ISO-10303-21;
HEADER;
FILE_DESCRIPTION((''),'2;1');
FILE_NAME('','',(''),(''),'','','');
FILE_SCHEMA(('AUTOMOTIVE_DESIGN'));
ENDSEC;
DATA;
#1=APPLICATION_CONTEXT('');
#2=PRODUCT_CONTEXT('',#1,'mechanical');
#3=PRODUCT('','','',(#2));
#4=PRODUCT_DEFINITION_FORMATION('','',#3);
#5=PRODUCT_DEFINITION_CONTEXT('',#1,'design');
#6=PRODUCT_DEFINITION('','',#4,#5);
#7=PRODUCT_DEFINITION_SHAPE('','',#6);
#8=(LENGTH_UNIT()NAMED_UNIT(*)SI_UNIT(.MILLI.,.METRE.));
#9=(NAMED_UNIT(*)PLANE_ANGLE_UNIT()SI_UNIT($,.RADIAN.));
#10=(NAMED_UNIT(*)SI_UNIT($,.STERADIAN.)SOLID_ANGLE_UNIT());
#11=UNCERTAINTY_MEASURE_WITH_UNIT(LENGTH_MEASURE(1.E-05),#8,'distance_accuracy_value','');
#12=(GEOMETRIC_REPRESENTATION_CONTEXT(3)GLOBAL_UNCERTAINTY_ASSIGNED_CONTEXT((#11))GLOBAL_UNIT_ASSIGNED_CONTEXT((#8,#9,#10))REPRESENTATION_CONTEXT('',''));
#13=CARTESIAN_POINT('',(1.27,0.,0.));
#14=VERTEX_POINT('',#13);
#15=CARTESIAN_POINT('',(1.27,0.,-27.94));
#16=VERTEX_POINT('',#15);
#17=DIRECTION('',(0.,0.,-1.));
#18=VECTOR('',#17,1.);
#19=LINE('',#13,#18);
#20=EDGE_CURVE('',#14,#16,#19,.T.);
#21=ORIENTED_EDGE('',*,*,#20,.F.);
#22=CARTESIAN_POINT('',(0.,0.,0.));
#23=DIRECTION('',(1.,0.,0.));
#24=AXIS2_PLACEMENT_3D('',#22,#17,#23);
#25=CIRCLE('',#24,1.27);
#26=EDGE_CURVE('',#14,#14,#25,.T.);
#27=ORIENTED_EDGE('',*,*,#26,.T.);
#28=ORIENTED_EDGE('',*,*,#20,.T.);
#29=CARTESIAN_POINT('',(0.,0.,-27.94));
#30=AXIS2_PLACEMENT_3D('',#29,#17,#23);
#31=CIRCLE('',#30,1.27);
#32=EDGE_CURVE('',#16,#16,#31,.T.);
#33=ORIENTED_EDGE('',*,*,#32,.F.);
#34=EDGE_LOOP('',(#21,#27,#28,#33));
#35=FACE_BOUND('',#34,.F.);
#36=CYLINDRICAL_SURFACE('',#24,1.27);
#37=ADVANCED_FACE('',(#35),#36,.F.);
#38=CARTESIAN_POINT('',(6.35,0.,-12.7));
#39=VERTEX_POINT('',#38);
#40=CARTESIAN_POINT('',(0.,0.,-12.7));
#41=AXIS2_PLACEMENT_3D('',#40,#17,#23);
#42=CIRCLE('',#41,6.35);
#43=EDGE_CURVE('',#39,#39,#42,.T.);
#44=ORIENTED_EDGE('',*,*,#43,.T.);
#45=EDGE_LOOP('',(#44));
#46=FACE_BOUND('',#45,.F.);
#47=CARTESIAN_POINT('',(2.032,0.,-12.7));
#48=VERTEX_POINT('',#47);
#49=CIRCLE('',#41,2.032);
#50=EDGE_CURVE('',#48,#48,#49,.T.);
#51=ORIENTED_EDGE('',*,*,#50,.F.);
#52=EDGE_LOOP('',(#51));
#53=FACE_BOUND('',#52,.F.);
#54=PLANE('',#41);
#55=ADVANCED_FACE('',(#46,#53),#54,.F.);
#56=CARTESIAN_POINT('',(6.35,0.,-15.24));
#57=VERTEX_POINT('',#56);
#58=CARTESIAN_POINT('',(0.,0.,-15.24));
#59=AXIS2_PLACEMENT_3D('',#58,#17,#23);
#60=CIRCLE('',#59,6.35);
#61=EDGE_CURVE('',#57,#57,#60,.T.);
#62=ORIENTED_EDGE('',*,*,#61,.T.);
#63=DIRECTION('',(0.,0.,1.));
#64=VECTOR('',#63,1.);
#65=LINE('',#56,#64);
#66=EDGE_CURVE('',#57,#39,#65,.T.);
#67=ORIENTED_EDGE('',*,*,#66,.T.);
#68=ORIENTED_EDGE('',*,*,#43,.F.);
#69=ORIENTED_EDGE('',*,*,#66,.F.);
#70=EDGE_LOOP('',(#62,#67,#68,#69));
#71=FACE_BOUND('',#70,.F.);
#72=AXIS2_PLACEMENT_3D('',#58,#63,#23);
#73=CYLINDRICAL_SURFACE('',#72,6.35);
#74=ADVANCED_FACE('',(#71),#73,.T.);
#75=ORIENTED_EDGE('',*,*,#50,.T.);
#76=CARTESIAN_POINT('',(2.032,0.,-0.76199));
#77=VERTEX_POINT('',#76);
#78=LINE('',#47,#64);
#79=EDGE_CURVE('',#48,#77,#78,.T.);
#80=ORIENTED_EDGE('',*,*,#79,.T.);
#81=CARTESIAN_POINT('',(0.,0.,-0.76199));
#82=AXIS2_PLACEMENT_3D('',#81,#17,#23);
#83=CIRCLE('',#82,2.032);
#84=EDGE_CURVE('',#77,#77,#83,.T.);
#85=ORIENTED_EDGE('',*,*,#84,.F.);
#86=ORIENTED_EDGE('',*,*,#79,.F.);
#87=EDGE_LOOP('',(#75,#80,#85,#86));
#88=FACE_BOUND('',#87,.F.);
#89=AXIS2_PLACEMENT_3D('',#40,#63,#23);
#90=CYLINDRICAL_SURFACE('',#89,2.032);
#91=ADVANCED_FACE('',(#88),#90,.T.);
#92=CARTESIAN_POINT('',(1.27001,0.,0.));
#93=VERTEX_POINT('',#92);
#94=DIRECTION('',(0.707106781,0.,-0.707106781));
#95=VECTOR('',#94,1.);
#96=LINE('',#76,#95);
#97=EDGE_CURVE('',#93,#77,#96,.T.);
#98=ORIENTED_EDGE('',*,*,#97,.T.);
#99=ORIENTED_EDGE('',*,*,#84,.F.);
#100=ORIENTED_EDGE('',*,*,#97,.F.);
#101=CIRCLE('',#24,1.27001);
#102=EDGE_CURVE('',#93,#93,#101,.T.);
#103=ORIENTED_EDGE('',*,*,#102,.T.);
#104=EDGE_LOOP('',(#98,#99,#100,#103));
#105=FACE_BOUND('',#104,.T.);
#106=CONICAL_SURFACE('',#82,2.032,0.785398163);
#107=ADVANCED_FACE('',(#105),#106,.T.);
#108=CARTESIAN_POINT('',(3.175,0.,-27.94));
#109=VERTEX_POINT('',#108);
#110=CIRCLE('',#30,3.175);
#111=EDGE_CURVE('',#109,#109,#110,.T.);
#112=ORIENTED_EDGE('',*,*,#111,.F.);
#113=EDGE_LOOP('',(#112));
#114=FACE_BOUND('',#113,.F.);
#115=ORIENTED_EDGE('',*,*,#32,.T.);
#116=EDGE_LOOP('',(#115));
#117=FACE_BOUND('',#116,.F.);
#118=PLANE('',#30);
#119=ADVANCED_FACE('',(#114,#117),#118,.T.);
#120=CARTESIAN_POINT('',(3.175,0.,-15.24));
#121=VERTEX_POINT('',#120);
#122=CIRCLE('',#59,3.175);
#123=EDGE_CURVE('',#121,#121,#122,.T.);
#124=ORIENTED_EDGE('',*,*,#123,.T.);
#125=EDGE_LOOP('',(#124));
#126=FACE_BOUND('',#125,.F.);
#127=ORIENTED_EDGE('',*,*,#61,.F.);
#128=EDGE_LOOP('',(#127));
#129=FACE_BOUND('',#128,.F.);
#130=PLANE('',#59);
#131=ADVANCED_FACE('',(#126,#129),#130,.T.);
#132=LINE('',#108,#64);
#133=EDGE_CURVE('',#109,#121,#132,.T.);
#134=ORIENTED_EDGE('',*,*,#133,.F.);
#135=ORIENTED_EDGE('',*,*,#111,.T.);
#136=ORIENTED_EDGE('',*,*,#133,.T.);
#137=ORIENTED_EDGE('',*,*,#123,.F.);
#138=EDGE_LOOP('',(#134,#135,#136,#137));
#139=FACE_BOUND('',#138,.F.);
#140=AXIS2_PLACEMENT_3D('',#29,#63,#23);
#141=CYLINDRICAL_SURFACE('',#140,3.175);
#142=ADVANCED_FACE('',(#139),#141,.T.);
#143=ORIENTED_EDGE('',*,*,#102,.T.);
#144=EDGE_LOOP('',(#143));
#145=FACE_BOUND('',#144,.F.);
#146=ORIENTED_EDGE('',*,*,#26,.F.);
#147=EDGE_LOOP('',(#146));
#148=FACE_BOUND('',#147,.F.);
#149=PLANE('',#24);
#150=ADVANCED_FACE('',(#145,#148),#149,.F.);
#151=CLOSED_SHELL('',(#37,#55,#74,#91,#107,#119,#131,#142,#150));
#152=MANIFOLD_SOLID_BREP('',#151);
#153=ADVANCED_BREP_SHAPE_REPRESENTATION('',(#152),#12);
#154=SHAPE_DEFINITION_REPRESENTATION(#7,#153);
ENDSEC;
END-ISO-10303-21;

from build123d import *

# Parameters (mm, degrees)
F2_SIZE = 0.76199


# Not quite as in the source:
# - a fillet or chamfer is up to 0.001 mm smaller than in the source, because OpenCascade refuses the exact size


with BuildPart() as f1:
    # F0 (on Front) → F1 (revolve)
    with BuildSketch(Plane.XZ):
        Polygon((2.032, 0), (1.27, 0), (1.27, -13.97), (1.27, -27.94), (3.175, -27.94), (3.175, -15.24), (6.35, -15.24), (6.35, -12.7), (2.032, -12.7), align=None)
    revolve(axis=Axis((0, 0, -18.8239812851), (0, 0, -1)))

    # F2 (size 0.762 in the source; OpenCascade refuses exactly that, so slightly less here)
    f2_edges = [f1.edges().sort_by_distance(p)[0] for p in [
        (-2.032, 0, 0),
    ]]
    chamfer(f2_edges, length=F2_SIZE)


solid = f1.part
